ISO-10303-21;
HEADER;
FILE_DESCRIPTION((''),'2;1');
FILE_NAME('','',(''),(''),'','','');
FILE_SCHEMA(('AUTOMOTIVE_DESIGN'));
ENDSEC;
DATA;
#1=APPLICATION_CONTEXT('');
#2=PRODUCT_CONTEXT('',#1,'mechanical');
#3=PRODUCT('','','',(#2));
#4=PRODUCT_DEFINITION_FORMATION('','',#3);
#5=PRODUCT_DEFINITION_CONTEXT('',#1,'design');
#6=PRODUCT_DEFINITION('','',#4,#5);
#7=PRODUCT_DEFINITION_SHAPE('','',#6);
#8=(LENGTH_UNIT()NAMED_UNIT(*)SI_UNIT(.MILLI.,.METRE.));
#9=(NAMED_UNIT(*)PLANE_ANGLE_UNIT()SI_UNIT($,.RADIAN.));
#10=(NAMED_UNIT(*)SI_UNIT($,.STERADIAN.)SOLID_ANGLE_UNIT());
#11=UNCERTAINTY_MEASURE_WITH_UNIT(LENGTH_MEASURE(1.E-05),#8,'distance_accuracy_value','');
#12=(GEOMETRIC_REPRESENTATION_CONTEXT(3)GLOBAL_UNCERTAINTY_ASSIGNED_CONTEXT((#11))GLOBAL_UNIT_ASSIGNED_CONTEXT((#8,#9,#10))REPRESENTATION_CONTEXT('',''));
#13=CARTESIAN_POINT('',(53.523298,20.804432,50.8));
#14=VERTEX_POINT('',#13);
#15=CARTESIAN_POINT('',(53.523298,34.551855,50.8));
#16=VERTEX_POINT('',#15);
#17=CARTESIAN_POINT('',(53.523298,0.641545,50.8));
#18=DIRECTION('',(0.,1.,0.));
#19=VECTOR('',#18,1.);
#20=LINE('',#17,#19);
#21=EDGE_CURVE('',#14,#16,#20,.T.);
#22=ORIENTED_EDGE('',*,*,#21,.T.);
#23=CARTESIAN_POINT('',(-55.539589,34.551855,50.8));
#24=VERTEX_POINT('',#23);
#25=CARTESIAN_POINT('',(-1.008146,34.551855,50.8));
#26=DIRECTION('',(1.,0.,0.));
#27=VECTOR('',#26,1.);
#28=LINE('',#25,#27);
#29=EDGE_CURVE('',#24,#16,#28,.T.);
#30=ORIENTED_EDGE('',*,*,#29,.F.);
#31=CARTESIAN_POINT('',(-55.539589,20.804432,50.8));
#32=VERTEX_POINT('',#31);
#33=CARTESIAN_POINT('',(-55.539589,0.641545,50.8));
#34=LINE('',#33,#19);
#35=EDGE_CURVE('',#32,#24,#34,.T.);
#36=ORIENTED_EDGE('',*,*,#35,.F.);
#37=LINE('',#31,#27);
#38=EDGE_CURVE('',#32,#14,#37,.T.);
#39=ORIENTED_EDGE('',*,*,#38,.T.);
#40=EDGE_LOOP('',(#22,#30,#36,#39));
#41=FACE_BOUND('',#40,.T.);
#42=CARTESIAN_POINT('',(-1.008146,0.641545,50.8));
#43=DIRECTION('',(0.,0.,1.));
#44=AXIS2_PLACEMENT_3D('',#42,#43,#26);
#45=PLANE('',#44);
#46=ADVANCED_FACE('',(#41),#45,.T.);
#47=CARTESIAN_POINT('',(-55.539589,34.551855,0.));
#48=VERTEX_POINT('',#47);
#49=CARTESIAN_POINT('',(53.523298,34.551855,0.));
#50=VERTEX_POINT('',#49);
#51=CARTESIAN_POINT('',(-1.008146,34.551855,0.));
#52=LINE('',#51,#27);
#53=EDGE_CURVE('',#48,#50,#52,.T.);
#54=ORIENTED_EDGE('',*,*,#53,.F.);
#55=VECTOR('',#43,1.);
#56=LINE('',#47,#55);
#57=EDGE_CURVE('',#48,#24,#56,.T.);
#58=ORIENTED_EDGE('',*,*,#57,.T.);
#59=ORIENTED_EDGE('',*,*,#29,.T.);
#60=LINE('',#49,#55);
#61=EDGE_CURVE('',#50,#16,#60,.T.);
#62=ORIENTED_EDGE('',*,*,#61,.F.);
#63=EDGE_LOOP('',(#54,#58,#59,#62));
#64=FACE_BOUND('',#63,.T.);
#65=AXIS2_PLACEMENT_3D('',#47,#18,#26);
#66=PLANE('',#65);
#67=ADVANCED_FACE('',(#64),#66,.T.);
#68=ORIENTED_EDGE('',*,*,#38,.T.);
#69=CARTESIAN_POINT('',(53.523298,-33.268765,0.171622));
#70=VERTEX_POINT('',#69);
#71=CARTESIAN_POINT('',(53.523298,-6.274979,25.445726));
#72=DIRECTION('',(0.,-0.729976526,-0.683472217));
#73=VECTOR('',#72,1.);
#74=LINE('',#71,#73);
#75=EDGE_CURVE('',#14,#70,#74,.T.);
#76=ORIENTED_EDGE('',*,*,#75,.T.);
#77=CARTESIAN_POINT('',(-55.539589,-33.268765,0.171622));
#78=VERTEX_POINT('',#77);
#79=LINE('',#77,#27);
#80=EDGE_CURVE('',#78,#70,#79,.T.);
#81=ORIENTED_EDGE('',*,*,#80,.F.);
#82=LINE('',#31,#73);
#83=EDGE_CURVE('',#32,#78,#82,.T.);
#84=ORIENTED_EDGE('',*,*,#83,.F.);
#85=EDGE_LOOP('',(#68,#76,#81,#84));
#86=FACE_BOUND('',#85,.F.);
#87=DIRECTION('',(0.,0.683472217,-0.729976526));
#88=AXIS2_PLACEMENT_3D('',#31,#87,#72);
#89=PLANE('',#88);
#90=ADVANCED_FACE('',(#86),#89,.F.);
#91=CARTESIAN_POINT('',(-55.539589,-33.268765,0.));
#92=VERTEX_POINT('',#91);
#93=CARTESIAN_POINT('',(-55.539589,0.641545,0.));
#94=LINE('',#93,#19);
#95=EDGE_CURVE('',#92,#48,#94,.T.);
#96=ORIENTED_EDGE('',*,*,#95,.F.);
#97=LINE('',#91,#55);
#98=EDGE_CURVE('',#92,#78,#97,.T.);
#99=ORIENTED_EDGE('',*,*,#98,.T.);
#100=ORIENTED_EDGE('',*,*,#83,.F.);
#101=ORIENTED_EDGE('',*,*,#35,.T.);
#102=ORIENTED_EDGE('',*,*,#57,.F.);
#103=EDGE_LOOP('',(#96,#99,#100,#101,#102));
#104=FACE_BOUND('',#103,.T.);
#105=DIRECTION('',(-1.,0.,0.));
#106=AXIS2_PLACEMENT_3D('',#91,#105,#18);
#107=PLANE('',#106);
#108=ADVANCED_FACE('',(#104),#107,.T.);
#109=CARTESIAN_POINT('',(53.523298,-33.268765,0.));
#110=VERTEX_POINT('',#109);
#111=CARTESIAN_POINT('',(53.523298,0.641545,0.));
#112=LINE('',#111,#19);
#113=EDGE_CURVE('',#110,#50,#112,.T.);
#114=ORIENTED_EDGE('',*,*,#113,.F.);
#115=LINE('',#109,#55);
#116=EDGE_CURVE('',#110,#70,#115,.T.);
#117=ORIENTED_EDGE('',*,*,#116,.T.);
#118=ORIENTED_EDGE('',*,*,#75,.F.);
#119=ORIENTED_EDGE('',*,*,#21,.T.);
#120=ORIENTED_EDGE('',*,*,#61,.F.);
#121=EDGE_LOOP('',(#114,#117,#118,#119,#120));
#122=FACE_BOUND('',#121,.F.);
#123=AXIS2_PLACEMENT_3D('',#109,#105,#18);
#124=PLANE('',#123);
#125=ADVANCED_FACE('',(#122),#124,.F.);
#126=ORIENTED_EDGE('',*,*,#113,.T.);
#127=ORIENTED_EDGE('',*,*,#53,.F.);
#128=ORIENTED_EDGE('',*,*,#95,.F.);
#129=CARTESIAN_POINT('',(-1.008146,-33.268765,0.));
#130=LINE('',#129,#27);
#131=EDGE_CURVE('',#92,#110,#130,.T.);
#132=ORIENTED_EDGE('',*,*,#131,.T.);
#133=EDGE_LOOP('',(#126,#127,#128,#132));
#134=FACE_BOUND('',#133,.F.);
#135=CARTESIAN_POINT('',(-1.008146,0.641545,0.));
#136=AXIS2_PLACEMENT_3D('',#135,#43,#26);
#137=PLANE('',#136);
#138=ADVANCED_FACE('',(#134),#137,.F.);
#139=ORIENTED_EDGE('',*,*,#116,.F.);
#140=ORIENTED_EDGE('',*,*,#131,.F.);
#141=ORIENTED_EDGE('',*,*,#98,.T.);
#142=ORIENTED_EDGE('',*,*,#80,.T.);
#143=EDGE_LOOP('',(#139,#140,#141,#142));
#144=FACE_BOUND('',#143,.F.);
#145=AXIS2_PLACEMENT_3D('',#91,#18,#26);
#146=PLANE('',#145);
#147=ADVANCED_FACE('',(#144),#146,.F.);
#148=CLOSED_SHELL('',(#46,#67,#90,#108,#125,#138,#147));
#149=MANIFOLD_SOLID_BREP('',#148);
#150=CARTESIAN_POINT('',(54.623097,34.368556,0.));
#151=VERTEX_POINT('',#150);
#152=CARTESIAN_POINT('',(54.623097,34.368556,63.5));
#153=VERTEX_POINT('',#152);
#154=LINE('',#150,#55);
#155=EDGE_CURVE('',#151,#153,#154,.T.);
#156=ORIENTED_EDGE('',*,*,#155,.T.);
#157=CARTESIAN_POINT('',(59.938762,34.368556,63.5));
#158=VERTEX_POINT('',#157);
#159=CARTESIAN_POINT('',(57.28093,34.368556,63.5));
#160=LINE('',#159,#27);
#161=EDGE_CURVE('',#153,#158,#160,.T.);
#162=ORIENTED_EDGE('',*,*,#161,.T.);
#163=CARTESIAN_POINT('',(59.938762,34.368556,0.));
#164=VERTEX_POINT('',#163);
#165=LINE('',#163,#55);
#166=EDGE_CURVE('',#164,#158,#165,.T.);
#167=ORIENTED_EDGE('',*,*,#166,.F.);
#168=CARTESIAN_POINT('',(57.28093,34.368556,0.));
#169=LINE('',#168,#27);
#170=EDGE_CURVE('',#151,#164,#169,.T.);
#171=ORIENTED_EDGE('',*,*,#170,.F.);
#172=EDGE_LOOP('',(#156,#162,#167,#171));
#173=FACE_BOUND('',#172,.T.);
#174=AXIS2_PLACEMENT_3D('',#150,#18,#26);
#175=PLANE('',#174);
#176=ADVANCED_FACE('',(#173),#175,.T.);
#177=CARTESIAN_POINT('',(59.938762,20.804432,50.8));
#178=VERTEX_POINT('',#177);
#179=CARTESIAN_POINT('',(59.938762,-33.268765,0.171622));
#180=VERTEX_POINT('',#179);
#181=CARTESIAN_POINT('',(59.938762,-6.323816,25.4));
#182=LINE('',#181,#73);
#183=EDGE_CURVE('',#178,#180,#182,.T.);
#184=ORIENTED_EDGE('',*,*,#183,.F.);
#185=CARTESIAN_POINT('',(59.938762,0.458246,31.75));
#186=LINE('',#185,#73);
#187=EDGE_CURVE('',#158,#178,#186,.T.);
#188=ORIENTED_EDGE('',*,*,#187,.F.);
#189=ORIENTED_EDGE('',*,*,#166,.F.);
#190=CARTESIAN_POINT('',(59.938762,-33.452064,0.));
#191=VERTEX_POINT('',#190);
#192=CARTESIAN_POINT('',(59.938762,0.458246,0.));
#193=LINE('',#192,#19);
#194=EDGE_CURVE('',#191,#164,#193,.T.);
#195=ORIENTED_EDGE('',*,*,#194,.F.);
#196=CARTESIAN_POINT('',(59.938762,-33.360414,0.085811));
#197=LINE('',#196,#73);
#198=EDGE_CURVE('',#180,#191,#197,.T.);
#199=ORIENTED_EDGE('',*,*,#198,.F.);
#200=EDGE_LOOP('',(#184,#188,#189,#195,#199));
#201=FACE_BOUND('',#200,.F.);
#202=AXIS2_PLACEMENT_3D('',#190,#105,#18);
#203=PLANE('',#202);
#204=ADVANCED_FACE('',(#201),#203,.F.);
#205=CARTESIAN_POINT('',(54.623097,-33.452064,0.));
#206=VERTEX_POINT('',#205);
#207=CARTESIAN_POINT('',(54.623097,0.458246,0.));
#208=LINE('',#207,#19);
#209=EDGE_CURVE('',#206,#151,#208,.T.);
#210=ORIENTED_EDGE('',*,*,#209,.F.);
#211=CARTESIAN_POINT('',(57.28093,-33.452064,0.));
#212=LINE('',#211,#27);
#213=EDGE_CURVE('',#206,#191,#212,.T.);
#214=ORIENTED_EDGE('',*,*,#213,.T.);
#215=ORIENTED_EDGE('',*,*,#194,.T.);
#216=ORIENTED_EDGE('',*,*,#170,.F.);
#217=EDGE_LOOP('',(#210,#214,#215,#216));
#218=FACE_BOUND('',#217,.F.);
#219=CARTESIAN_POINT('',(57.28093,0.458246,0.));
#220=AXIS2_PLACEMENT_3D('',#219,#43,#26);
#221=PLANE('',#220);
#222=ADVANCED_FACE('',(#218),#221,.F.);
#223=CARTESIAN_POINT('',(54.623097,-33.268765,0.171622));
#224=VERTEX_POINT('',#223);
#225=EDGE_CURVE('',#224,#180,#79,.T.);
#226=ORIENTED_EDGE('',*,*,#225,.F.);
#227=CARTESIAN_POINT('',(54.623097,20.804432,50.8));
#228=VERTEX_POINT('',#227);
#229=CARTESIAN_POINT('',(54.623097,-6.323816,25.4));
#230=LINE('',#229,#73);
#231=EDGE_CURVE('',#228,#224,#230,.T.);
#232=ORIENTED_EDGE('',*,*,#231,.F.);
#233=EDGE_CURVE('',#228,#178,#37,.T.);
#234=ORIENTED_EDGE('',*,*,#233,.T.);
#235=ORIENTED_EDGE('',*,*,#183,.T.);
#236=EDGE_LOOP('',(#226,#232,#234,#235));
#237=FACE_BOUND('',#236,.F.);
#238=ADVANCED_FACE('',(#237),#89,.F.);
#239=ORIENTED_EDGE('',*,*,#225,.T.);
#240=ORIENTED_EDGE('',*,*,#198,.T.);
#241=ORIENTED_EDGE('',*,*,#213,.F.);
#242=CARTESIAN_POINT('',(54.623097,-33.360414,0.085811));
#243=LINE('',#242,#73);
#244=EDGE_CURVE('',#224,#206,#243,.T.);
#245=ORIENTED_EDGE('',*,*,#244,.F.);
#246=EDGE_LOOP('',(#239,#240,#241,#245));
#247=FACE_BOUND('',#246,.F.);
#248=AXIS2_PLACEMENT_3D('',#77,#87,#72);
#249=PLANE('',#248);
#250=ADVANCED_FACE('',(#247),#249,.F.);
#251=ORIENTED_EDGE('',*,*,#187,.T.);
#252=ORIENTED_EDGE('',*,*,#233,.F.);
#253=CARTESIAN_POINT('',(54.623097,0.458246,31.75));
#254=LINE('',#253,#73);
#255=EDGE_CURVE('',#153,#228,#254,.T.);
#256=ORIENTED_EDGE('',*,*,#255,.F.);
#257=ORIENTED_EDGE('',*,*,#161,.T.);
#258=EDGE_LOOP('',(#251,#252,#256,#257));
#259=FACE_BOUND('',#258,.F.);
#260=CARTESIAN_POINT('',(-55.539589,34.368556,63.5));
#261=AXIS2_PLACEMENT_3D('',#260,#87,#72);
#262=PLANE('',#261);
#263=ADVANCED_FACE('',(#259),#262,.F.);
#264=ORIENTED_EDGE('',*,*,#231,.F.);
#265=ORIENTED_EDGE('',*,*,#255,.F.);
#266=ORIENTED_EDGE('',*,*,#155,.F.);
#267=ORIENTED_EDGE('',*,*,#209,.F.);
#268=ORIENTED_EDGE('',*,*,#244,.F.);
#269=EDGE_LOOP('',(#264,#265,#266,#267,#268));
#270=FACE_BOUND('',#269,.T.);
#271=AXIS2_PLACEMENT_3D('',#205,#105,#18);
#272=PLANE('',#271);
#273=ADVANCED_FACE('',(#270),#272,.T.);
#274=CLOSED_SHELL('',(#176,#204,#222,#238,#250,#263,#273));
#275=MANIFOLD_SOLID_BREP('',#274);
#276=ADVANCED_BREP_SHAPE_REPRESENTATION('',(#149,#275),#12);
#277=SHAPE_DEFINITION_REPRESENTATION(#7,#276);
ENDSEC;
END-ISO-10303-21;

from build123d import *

# Parameters (mm, degrees)
F0_W     = 109.0628877282
F0_H     = 67.8206197917
F1_DEPTH = 50.8
F2_W     = 5.3156651556
F2_H     = 67.8206197917
F3_DEPTH = 63.5
F5_DEPTH = 127


# Not quite as in the source:
# - a feature of the source that left no trace in its solid (it failed there, or was rolled back) is left out


with BuildPart() as f1:
    # F0 (on Top) → F1 (new body)
    with BuildSketch(Plane.XY):
        with Locations((-1.0081455112, 0.6415452808)):
            Rectangle(F0_W, F0_H)
    extrude(amount=F1_DEPTH)


with BuildPart() as f3:
    # F2 (on Top) → F3 (new body)
    with BuildSketch(Plane.XY):
        with Locations((57.2809297591, 0.458246097)):
            Rectangle(F2_W, F2_H)
    extrude(amount=F3_DEPTH)


with BuildPart() as f5_tool:
    # F4 (on face) → F5 (new body)
    with BuildSketch(Plane(origin=(-55.5395893753, 0, 0), x_dir=(0, -1, 0), z_dir=(-1, 0, 0))):
        Polygon((-34.3685559928, 63.5), (-20.8044320345, 50.8), (33.2687646151, 50.8), (33.2687646151, 0.1716218196), (33.4520637989, 0), (33.4520637989, 63.5), align=None)
        Polygon((33.2687646151, 50.8), (-20.8044320345, 50.8), (33.2687646151, 0.1716218196), align=None)
    extrude(amount=-F5_DEPTH)


with BuildPart() as f1_1:
    add(f1.part)

    # F5: cut by f5_tool
    add(f5_tool.part, mode=Mode.SUBTRACT)


with BuildPart() as f3_1:
    add(f3.part)

    # F5: cut by f5_tool
    add(f5_tool.part, mode=Mode.SUBTRACT)


solid = Compound([f1_1.part, f3_1.part])
